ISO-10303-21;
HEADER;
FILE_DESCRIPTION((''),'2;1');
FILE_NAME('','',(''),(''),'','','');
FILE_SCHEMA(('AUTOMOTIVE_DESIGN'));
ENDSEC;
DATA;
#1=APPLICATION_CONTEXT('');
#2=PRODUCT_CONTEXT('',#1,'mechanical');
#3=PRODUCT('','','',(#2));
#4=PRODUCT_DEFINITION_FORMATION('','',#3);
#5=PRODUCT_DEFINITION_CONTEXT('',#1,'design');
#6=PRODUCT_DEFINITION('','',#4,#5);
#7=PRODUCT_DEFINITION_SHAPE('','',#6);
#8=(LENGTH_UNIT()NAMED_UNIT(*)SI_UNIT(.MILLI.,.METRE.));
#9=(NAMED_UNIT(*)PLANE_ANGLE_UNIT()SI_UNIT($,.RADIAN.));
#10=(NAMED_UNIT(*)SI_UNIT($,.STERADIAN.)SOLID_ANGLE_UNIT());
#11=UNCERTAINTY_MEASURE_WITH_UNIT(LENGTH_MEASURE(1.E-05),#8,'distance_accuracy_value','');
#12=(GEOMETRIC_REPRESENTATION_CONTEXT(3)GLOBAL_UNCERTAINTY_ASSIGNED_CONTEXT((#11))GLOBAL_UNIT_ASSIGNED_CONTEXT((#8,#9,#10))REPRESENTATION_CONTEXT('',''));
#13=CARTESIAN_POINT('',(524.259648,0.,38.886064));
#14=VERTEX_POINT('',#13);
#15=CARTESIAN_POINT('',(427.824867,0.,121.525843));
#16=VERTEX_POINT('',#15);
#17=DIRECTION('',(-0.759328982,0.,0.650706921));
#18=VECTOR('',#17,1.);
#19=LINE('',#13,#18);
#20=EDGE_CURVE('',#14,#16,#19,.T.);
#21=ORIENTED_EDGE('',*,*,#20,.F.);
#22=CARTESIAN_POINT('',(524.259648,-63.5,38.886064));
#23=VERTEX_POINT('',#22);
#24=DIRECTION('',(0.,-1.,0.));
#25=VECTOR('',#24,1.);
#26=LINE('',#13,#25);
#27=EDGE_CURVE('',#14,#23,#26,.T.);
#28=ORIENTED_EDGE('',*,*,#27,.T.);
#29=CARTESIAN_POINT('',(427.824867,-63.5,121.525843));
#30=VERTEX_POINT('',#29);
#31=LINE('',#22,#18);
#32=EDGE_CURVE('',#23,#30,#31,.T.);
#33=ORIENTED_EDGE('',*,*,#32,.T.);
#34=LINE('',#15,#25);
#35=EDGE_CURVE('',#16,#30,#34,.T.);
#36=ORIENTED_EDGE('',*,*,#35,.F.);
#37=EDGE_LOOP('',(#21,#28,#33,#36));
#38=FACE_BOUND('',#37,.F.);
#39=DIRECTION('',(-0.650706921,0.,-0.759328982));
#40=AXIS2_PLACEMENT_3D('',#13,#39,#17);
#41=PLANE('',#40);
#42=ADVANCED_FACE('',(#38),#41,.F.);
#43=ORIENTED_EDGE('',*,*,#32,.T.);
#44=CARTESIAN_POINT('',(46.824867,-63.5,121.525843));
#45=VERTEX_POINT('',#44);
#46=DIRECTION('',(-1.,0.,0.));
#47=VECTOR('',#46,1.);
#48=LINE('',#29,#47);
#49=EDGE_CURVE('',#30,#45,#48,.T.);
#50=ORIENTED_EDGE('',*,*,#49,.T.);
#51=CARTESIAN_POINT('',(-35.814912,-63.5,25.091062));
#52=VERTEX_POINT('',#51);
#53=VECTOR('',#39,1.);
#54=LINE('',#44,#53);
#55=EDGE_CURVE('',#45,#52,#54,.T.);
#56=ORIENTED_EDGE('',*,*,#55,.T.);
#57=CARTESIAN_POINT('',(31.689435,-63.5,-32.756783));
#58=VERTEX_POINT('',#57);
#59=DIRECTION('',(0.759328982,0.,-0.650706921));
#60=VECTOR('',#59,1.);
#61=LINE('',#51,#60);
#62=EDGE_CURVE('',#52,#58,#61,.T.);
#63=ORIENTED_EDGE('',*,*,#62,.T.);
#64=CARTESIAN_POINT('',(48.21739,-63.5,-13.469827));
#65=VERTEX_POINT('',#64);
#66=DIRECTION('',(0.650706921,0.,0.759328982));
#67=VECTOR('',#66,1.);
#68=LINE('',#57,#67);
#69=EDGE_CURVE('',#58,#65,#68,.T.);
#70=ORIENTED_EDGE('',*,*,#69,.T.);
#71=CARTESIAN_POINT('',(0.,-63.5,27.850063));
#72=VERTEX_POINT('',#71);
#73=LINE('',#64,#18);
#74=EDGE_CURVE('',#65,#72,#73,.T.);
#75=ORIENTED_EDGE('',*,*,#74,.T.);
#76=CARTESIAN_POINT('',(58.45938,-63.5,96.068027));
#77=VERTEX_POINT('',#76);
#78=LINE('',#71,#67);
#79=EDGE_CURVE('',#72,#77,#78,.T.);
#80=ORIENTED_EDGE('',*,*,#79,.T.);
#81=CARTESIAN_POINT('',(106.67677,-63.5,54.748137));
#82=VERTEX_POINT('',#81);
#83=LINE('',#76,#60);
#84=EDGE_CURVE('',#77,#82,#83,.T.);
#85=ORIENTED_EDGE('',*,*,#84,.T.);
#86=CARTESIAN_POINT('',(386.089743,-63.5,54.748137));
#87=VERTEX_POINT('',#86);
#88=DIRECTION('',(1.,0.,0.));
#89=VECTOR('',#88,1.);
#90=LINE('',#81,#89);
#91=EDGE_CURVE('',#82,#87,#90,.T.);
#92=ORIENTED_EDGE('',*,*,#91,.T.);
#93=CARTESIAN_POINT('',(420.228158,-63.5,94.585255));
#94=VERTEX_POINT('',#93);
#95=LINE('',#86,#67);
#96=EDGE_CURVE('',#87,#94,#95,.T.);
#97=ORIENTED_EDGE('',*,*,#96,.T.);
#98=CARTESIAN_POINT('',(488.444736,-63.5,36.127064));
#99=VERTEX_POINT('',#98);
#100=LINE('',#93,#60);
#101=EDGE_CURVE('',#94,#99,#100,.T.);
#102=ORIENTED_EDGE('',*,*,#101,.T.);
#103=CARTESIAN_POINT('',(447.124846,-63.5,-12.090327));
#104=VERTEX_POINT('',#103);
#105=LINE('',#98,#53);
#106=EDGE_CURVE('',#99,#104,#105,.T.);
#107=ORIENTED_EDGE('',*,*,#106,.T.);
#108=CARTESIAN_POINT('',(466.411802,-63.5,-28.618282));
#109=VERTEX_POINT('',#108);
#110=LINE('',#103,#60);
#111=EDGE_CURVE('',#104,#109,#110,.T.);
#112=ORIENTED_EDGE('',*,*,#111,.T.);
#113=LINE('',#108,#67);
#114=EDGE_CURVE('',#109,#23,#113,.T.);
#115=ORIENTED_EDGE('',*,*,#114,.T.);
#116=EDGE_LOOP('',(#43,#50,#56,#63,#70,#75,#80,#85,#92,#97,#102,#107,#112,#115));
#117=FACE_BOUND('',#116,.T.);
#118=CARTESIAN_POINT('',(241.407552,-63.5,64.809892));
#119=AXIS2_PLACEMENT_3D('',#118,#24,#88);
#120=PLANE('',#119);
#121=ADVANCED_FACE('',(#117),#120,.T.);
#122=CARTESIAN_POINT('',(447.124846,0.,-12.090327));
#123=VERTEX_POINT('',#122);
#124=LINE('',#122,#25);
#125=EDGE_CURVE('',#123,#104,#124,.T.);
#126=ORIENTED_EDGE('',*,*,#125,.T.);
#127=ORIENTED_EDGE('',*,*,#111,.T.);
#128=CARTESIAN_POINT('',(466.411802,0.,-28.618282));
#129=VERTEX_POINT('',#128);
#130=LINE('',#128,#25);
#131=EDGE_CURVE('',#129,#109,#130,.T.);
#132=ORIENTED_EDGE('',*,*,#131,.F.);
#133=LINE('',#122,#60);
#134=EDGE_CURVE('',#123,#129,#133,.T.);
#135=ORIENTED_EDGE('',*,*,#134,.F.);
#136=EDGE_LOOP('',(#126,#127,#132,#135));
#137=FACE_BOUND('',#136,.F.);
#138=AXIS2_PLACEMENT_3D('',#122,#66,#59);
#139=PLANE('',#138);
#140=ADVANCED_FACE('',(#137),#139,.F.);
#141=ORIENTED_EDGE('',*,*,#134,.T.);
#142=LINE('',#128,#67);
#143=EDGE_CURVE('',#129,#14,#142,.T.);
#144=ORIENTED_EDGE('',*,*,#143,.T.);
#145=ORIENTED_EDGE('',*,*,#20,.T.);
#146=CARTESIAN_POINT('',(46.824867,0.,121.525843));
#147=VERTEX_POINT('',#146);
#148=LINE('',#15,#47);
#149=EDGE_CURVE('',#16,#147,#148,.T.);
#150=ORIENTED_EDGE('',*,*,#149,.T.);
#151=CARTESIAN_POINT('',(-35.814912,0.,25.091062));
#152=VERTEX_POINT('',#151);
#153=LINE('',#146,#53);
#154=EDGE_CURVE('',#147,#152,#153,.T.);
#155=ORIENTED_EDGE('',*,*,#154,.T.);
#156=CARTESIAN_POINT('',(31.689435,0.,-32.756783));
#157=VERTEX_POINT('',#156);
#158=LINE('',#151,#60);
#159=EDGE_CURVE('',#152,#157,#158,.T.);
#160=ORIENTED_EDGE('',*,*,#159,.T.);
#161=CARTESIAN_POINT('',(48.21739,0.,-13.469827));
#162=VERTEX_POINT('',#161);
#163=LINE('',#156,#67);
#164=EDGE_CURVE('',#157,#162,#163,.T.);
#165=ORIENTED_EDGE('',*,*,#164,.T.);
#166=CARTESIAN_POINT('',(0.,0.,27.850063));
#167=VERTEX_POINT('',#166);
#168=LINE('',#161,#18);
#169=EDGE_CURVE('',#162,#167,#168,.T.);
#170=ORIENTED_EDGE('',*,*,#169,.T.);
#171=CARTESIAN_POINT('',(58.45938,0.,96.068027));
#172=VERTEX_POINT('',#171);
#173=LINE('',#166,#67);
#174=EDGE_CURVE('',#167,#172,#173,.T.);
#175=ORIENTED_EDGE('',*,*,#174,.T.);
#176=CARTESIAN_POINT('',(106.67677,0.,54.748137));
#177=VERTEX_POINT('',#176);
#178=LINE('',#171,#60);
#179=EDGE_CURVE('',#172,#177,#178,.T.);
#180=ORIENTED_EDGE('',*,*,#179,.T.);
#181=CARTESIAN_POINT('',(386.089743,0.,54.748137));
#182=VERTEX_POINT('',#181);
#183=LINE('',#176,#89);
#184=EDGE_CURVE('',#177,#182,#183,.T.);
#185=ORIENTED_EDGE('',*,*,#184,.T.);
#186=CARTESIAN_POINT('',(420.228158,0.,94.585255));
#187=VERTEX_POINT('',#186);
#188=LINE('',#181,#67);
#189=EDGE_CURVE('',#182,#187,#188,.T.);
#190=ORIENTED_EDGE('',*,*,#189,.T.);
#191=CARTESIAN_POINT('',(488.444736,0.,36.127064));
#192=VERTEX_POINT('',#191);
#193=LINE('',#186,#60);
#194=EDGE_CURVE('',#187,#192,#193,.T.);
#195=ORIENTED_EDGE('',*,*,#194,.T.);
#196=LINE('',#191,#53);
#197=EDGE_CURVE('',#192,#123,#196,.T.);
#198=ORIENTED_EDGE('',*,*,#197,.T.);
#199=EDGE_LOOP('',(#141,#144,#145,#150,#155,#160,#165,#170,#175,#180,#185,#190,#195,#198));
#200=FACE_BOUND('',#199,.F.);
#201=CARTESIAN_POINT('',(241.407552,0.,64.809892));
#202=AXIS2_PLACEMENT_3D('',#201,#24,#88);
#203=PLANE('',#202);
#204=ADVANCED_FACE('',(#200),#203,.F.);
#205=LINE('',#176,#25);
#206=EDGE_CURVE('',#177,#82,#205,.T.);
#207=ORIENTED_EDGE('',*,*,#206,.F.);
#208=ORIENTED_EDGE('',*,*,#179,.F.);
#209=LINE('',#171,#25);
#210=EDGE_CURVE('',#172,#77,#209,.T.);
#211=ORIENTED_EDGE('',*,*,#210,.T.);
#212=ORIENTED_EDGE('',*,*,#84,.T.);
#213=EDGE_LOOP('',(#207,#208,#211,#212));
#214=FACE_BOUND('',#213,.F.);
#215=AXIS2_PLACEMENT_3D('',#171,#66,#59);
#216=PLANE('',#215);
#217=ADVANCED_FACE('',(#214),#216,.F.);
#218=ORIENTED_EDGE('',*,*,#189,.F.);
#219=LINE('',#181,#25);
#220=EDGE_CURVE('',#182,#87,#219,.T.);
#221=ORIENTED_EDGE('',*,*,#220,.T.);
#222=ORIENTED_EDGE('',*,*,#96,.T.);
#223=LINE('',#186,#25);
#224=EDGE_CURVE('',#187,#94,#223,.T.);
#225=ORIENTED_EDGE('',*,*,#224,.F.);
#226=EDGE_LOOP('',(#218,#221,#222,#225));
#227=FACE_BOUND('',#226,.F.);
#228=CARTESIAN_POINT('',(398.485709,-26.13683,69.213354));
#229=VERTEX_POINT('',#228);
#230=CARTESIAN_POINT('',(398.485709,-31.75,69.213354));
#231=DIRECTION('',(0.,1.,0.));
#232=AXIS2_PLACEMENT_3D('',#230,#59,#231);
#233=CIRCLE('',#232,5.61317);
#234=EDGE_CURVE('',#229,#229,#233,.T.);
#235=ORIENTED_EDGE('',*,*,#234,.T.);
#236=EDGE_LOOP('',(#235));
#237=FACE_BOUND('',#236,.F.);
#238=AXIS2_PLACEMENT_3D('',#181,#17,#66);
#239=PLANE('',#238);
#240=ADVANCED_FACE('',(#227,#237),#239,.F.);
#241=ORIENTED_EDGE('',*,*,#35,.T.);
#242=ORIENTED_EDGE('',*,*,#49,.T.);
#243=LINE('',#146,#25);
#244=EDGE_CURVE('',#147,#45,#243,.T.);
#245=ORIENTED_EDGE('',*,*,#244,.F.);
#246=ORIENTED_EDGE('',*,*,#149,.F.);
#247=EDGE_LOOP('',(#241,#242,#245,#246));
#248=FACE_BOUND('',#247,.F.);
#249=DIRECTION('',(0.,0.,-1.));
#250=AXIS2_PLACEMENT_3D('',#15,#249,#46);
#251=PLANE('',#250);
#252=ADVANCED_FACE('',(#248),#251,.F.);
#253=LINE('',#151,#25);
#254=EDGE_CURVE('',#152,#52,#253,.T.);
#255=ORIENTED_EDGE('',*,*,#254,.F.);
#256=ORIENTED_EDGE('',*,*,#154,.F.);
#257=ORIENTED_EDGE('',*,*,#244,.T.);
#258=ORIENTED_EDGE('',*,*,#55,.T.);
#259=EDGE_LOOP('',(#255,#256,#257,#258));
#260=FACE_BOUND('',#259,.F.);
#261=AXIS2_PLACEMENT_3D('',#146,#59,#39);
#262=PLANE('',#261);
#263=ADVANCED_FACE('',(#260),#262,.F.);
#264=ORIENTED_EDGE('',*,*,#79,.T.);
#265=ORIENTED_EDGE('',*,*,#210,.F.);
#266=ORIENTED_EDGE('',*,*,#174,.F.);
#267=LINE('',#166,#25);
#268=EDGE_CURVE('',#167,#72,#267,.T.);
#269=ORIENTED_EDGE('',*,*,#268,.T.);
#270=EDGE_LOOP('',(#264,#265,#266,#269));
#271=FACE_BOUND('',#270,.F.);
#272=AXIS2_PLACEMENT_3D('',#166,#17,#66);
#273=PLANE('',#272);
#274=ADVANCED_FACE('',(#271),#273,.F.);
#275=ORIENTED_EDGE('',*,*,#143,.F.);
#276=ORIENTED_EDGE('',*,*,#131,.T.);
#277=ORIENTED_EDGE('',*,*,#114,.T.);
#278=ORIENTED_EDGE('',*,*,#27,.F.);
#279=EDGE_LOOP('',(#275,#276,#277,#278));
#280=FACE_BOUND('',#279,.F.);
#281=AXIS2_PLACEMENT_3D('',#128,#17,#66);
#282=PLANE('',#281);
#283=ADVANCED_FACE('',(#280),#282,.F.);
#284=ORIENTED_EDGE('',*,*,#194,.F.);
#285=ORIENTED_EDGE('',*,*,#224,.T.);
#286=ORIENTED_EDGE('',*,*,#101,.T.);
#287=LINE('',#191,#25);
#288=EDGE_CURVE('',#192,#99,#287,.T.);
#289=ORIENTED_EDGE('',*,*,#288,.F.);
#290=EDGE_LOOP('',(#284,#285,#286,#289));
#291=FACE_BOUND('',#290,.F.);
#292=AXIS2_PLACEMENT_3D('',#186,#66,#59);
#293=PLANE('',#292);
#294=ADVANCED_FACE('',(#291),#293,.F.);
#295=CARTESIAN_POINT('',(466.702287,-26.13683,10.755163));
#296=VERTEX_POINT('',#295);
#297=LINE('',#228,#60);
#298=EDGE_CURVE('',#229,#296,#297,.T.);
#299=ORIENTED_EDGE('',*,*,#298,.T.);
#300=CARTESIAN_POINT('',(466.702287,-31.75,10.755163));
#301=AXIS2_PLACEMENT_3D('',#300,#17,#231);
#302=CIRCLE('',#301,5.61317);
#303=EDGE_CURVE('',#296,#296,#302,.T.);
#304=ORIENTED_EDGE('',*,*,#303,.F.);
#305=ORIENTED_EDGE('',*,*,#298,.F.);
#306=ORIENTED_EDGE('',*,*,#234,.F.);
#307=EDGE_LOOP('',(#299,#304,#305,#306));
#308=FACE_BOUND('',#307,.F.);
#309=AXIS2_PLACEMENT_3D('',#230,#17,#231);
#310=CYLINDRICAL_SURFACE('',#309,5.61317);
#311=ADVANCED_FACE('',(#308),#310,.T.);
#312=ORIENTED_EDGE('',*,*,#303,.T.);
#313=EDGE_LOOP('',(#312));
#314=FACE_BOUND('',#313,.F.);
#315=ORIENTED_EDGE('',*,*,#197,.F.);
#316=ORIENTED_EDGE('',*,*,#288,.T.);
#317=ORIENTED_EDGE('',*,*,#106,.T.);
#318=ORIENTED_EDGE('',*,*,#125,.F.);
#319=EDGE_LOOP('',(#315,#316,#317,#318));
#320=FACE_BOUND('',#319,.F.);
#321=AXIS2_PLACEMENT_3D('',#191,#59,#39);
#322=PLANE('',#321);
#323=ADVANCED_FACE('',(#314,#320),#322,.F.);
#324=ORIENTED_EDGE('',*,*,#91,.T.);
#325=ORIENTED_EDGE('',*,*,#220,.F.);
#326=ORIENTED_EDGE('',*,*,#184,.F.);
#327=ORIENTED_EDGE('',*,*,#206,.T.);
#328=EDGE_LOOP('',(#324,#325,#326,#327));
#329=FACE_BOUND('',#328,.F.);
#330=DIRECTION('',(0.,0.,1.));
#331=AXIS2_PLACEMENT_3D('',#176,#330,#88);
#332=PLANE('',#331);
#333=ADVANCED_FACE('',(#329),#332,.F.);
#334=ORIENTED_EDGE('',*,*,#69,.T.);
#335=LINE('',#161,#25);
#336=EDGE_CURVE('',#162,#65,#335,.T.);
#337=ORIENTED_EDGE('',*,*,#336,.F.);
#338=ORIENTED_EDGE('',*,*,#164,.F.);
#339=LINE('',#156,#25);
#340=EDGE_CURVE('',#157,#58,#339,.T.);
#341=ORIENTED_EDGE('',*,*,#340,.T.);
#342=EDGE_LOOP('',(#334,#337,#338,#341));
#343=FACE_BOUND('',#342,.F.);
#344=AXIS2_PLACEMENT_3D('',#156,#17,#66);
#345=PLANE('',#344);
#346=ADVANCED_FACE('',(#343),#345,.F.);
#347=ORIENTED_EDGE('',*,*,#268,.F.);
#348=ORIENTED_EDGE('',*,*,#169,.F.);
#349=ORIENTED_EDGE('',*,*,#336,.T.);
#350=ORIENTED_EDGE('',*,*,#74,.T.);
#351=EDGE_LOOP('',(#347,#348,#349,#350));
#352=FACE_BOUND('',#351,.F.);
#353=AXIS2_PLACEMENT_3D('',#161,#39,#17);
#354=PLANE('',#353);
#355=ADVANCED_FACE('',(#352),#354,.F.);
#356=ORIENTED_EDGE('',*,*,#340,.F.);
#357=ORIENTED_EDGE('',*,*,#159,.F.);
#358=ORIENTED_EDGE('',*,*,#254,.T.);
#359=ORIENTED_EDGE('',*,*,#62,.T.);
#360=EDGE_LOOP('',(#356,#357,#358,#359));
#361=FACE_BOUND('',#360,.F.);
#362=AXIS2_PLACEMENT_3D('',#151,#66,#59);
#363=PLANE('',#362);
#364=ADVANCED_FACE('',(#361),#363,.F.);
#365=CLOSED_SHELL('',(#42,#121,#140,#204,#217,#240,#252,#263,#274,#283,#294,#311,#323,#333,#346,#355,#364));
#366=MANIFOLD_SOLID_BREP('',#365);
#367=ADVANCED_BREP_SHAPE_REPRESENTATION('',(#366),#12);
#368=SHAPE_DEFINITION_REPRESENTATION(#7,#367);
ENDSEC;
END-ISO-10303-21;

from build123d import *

# Parameters (mm, degrees)
F1_DEPTH = 63.5
F2_R     = 5.6131699843
F3_DEPTH = 107.696


# Not quite as in the source:
# - the program builds the solid bodies; features that only make, move or delete a surface that nothing else refers to are left out


with BuildPart() as f1:
    # F0 (on Front) → F1 (new body)
    with BuildSketch(Plane.XZ):
        Polygon((46.8248670694, 121.5258430131), (-35.8149119383, 25.0910623293), (31.6894345404, -32.7567829762), (48.2173903419, -13.4698268394), (0, 27.8500626645), (58.4593796701, 96.0680265203), (106.676770012, 54.7481370164), (386.0897425486, 54.7481370164), (420.2281583997, 94.5852552302), (488.444735815, 36.1270636701), (447.1248463111, -12.0903266718), (466.4118024479, -28.6182824733), (524.2596477533, 38.8860640054), (427.8248670694, 121.5258430131), align=None)
    extrude(amount=F1_DEPTH)

    # F2 (on face) → F3 (join)
    with BuildSketch(Plane(origin=(195.5607291239, 0, -167.5857540484), x_dir=(0, 1, 0), z_dir=(0.7593289818, 0, -0.6507069213))):
        with Locations((-31.75, 311.8531148615)):
            Circle(F2_R)
    extrude(amount=F3_DEPTH)


solid = f1.part
